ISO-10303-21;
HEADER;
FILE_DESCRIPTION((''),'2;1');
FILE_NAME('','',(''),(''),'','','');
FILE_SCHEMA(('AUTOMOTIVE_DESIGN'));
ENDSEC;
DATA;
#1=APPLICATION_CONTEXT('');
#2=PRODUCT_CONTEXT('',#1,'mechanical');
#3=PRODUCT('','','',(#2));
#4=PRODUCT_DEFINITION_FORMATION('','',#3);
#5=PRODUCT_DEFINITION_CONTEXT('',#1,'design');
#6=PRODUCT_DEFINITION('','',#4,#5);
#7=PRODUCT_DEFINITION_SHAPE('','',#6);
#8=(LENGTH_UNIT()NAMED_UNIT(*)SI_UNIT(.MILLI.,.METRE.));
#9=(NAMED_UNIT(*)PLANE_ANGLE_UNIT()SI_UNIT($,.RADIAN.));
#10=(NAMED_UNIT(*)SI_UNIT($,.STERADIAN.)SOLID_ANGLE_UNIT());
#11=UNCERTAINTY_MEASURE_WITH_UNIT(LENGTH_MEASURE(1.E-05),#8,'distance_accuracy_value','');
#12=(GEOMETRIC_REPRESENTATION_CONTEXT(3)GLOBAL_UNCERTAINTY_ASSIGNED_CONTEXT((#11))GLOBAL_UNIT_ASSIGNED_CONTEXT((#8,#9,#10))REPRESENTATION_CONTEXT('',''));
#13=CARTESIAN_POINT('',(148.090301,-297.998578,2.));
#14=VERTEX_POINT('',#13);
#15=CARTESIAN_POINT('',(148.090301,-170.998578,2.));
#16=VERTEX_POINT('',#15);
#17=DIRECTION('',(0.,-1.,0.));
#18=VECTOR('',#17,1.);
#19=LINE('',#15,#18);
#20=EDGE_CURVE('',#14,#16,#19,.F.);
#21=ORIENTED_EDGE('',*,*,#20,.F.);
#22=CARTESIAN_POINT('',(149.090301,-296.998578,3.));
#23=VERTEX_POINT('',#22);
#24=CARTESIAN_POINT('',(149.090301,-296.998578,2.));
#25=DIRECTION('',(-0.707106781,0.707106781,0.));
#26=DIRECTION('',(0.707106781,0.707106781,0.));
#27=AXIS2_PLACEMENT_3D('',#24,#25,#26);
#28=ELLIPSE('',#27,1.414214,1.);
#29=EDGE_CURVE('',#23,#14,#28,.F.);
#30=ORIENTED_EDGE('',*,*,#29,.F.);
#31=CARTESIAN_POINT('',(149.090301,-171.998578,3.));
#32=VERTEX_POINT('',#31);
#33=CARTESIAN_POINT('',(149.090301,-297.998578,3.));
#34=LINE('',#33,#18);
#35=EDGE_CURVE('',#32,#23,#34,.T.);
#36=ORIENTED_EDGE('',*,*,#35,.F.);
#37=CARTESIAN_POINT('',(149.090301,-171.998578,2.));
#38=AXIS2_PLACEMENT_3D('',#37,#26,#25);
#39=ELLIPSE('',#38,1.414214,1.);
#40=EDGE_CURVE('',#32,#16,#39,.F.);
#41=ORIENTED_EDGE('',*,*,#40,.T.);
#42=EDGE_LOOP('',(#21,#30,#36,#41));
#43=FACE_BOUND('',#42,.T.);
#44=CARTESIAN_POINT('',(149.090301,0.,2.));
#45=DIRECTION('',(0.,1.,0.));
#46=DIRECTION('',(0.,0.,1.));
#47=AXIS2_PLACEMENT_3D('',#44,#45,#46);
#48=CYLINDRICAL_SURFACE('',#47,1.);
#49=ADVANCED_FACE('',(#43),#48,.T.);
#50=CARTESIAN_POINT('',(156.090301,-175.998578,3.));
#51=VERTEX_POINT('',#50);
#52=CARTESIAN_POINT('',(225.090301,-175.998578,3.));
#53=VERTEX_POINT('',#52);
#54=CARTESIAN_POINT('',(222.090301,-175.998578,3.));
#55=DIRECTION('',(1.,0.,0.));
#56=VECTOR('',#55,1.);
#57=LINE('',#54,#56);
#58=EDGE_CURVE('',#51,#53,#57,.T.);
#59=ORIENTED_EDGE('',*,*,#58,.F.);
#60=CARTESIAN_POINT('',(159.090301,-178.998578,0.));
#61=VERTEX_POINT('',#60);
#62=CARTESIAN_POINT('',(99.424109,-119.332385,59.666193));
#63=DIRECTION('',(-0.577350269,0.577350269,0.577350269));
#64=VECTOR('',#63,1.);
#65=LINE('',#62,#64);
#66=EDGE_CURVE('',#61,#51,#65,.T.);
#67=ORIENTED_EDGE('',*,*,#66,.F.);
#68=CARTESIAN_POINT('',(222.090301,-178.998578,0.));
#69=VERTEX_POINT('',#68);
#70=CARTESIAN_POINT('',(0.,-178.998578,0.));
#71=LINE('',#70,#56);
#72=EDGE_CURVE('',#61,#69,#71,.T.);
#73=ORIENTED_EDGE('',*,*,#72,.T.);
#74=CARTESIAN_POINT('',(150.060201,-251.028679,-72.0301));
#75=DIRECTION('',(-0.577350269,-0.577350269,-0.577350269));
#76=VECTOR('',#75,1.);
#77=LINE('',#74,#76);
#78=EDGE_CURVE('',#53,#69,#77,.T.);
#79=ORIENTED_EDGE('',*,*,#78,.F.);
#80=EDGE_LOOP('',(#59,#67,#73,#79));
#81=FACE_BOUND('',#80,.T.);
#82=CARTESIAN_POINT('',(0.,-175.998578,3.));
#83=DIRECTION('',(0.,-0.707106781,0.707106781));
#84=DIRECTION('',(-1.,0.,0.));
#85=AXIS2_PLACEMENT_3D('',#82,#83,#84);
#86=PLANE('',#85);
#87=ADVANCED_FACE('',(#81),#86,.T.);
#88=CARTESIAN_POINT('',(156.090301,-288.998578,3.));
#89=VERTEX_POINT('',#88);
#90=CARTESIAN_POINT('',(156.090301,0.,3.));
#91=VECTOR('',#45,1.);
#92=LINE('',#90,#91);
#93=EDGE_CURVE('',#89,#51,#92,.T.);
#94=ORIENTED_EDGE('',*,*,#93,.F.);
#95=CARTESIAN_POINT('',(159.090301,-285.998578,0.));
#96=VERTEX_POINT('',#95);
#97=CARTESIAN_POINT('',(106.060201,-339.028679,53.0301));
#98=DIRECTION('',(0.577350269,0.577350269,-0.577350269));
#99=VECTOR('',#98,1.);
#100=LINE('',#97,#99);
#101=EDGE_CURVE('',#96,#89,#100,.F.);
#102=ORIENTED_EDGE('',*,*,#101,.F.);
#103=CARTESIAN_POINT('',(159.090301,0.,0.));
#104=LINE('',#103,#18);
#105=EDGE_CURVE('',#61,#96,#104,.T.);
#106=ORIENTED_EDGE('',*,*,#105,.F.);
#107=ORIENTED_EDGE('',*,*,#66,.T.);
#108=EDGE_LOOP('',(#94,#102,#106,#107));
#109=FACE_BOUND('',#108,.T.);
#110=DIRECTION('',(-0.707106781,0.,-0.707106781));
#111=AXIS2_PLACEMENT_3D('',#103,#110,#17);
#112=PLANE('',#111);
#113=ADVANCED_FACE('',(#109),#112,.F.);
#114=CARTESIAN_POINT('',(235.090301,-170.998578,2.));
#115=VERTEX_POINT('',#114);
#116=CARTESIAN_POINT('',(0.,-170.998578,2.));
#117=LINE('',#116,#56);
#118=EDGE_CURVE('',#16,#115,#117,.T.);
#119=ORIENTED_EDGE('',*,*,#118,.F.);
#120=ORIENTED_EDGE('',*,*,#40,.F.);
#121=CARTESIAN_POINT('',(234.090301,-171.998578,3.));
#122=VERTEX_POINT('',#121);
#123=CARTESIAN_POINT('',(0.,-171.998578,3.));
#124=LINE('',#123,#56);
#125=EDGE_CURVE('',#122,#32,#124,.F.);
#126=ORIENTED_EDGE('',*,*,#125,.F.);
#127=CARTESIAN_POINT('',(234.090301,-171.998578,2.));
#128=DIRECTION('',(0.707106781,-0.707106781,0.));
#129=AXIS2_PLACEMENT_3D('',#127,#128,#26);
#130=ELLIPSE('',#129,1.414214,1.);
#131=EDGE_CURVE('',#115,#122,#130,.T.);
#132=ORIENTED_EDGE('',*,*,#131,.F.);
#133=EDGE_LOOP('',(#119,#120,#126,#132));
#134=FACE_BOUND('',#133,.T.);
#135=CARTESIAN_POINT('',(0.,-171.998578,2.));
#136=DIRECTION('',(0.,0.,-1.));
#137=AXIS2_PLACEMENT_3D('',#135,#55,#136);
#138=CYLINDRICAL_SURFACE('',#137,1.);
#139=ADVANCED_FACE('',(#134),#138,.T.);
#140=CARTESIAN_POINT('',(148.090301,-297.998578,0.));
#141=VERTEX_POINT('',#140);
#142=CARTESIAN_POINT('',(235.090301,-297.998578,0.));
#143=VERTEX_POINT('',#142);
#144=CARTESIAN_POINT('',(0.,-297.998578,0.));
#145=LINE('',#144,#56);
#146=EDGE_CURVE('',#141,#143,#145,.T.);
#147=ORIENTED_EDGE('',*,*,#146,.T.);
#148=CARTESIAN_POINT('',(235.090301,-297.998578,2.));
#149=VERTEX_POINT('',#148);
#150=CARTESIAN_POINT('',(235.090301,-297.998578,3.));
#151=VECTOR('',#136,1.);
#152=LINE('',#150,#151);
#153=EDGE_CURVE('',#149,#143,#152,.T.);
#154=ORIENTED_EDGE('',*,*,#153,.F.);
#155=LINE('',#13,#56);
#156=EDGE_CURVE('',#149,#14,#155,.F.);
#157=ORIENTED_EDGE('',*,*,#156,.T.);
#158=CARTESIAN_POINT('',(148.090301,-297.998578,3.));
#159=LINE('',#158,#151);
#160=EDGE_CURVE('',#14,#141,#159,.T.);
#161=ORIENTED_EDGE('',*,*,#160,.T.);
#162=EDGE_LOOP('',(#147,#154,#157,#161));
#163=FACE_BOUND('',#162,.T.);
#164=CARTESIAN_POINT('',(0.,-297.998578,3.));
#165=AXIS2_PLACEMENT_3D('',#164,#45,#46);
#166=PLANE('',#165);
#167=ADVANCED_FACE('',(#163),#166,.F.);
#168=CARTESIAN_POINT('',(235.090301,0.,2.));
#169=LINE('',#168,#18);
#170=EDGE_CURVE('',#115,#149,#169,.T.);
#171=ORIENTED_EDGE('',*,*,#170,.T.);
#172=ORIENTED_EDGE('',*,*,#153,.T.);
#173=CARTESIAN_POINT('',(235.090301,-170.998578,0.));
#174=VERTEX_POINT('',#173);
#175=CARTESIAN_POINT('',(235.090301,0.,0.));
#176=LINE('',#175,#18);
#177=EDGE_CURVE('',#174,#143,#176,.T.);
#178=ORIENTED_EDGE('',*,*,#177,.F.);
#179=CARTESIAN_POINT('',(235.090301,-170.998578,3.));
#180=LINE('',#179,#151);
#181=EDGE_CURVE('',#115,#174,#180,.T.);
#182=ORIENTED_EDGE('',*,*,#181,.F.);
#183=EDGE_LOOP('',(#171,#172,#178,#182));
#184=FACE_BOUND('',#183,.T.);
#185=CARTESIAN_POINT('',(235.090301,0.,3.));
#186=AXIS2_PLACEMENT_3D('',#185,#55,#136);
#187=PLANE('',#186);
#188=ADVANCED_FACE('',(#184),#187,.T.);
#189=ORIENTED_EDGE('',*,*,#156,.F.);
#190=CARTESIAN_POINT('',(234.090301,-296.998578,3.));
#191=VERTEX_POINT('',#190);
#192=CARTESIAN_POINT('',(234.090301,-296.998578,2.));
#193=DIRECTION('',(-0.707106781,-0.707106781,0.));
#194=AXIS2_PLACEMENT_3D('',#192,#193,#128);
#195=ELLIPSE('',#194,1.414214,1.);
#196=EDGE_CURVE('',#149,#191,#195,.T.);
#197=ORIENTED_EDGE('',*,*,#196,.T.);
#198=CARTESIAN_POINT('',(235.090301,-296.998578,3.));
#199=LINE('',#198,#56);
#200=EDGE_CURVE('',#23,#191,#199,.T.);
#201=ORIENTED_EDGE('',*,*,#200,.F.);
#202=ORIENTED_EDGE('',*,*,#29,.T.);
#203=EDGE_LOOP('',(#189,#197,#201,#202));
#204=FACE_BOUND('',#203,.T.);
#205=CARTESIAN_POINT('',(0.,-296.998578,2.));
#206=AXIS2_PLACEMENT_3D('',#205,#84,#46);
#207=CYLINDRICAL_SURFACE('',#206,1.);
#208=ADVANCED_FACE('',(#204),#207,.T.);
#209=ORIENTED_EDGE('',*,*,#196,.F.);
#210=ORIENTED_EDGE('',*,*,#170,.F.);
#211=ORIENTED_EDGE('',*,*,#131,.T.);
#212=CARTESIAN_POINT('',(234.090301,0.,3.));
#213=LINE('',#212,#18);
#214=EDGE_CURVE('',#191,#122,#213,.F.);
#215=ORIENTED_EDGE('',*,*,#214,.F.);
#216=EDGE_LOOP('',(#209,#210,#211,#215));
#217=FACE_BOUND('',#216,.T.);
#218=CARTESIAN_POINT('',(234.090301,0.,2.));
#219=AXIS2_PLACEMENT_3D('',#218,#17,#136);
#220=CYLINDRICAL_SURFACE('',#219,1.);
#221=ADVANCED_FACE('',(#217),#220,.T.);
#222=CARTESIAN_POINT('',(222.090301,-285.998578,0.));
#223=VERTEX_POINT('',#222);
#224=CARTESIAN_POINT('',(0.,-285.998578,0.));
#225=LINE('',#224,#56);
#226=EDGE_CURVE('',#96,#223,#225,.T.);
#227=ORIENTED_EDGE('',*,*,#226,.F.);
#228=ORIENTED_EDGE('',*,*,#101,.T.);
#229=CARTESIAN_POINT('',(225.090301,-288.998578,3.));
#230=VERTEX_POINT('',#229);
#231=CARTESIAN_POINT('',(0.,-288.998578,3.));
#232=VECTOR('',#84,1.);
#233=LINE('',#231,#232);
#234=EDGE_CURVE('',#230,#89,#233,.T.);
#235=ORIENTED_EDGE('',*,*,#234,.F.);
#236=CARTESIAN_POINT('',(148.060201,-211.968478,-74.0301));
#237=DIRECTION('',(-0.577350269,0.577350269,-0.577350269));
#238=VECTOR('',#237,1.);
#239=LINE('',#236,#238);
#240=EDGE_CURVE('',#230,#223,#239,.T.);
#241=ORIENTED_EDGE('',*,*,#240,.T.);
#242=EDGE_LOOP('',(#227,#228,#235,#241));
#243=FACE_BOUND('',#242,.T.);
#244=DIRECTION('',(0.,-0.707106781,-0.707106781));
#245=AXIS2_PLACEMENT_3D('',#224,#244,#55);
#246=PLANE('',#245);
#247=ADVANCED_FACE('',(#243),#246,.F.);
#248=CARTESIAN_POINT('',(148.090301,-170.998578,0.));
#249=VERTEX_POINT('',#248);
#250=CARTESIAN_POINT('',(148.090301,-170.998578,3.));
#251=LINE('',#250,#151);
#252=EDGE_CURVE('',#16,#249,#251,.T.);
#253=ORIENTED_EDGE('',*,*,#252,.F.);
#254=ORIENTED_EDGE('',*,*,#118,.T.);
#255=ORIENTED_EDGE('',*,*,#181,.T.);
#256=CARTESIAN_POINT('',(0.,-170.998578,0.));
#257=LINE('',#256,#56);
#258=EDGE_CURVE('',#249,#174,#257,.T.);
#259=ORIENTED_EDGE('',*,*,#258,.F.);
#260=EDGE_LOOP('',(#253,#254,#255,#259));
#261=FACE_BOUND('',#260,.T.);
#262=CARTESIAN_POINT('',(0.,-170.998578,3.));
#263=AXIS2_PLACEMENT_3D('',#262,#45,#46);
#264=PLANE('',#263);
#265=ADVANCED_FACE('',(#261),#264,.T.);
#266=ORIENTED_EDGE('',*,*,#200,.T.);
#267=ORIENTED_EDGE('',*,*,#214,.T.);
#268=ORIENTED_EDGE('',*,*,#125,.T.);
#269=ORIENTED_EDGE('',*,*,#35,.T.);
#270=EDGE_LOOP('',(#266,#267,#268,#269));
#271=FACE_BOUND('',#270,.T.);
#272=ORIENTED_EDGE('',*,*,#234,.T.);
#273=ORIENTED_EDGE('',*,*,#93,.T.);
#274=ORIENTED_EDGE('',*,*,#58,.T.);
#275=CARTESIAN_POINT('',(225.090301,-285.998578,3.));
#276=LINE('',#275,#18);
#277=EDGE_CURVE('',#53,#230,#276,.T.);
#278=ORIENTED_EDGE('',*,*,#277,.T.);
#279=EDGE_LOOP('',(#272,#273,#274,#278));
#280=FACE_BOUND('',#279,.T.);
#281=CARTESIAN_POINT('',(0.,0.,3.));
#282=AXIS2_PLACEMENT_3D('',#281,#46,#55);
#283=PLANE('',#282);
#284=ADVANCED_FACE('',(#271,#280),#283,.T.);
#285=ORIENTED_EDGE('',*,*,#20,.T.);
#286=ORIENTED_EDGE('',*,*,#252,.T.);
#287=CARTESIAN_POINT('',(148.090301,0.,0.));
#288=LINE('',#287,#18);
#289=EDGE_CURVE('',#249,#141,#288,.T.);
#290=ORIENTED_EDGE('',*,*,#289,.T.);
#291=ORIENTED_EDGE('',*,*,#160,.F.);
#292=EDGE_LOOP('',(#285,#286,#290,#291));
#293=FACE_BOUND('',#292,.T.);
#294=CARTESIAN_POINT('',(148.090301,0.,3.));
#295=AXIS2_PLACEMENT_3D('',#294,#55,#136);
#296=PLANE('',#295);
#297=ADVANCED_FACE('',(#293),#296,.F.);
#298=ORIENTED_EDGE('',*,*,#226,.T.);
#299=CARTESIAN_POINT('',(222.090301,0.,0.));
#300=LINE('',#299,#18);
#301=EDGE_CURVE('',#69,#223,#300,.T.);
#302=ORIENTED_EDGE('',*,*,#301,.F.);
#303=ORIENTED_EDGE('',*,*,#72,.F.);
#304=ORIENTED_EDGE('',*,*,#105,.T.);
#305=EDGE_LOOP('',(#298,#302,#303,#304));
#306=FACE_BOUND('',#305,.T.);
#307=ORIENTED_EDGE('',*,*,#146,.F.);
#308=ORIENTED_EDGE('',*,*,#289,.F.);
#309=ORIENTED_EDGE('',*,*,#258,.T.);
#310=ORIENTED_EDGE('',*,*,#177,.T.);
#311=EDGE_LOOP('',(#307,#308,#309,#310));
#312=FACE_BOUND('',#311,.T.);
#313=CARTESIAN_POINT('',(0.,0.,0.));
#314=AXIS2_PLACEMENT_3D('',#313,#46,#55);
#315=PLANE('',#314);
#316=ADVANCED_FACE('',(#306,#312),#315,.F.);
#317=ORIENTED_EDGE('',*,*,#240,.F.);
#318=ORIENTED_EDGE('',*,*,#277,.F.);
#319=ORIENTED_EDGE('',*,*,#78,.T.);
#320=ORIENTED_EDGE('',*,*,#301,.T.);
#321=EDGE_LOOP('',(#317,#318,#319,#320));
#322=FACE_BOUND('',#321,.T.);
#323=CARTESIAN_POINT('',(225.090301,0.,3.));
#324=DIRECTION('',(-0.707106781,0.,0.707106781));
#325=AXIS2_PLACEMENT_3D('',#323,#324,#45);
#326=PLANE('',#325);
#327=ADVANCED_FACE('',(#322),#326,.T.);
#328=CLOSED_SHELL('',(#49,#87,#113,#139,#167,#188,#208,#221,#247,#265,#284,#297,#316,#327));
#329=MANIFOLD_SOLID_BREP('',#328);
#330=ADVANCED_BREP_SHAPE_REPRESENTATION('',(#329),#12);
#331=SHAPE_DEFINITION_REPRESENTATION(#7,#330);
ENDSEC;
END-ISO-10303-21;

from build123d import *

# Parameters (mm, degrees)
SKETCH1_W           = 87
SKETCH1_H           = 127
SKETCH1_W_2         = 79
SKETCH1_H_2         = 119
SKETCH1_W_3         = 63
SKETCH1_H_3         = 107
BOSS_EXTRUDE1_DEPTH = 3
CHAMFER2_SIZE       = 3
FILLET1_R           = 1


with BuildPart() as part:
    # Sketch1 → Boss-Extrude1 (new body)
    # profile 1 of 2: a face of its own
    with BuildSketch(Plane.XY):
        with Locations((191.590301411, -234.498578163)):
            Rectangle(SKETCH1_W, SKETCH1_H)
        with Locations((191.590301411, -234.498578163)):
            Rectangle(SKETCH1_W_2, SKETCH1_H_2, mode=Mode.SUBTRACT)
    # profile 2 of 2: a face of its own
    with BuildSketch(Plane.XY):
        with Locations((191.590301411, -234.498578163)):
            Rectangle(SKETCH1_W_2, SKETCH1_H_2)
        with Locations((190.590301411, -232.498578163)):
            Rectangle(SKETCH1_W_3, SKETCH1_H_3, mode=Mode.SUBTRACT)
    extrude(amount=BOSS_EXTRUDE1_DEPTH)

    # Chamfer2
    chamfer2_edges = [part.edges().sort_by_distance(p)[0] for p in [
        (190.590301411, -285.998578163, 3),
        (159.090301411, -232.498578163, 3),
        (190.590301411, -178.998578163, 3),
        (222.090301411, -232.498578163, 3),
    ]]
    chamfer(chamfer2_edges, length=CHAMFER2_SIZE - 0.0001)  # a hair under: the kernel refuses the full size

    # Fillet1
    fillet1_edges = [part.edges().sort_by_distance(p)[0] for p in [
        (191.590301411, -170.998578163, 3),
        (148.090301411, -234.498578163, 3),
        (191.590301411, -297.998578163, 3),
        (235.090301411, -234.498578163, 3),
    ]]
    fillet(fillet1_edges, radius=FILLET1_R)


solid = part.part
